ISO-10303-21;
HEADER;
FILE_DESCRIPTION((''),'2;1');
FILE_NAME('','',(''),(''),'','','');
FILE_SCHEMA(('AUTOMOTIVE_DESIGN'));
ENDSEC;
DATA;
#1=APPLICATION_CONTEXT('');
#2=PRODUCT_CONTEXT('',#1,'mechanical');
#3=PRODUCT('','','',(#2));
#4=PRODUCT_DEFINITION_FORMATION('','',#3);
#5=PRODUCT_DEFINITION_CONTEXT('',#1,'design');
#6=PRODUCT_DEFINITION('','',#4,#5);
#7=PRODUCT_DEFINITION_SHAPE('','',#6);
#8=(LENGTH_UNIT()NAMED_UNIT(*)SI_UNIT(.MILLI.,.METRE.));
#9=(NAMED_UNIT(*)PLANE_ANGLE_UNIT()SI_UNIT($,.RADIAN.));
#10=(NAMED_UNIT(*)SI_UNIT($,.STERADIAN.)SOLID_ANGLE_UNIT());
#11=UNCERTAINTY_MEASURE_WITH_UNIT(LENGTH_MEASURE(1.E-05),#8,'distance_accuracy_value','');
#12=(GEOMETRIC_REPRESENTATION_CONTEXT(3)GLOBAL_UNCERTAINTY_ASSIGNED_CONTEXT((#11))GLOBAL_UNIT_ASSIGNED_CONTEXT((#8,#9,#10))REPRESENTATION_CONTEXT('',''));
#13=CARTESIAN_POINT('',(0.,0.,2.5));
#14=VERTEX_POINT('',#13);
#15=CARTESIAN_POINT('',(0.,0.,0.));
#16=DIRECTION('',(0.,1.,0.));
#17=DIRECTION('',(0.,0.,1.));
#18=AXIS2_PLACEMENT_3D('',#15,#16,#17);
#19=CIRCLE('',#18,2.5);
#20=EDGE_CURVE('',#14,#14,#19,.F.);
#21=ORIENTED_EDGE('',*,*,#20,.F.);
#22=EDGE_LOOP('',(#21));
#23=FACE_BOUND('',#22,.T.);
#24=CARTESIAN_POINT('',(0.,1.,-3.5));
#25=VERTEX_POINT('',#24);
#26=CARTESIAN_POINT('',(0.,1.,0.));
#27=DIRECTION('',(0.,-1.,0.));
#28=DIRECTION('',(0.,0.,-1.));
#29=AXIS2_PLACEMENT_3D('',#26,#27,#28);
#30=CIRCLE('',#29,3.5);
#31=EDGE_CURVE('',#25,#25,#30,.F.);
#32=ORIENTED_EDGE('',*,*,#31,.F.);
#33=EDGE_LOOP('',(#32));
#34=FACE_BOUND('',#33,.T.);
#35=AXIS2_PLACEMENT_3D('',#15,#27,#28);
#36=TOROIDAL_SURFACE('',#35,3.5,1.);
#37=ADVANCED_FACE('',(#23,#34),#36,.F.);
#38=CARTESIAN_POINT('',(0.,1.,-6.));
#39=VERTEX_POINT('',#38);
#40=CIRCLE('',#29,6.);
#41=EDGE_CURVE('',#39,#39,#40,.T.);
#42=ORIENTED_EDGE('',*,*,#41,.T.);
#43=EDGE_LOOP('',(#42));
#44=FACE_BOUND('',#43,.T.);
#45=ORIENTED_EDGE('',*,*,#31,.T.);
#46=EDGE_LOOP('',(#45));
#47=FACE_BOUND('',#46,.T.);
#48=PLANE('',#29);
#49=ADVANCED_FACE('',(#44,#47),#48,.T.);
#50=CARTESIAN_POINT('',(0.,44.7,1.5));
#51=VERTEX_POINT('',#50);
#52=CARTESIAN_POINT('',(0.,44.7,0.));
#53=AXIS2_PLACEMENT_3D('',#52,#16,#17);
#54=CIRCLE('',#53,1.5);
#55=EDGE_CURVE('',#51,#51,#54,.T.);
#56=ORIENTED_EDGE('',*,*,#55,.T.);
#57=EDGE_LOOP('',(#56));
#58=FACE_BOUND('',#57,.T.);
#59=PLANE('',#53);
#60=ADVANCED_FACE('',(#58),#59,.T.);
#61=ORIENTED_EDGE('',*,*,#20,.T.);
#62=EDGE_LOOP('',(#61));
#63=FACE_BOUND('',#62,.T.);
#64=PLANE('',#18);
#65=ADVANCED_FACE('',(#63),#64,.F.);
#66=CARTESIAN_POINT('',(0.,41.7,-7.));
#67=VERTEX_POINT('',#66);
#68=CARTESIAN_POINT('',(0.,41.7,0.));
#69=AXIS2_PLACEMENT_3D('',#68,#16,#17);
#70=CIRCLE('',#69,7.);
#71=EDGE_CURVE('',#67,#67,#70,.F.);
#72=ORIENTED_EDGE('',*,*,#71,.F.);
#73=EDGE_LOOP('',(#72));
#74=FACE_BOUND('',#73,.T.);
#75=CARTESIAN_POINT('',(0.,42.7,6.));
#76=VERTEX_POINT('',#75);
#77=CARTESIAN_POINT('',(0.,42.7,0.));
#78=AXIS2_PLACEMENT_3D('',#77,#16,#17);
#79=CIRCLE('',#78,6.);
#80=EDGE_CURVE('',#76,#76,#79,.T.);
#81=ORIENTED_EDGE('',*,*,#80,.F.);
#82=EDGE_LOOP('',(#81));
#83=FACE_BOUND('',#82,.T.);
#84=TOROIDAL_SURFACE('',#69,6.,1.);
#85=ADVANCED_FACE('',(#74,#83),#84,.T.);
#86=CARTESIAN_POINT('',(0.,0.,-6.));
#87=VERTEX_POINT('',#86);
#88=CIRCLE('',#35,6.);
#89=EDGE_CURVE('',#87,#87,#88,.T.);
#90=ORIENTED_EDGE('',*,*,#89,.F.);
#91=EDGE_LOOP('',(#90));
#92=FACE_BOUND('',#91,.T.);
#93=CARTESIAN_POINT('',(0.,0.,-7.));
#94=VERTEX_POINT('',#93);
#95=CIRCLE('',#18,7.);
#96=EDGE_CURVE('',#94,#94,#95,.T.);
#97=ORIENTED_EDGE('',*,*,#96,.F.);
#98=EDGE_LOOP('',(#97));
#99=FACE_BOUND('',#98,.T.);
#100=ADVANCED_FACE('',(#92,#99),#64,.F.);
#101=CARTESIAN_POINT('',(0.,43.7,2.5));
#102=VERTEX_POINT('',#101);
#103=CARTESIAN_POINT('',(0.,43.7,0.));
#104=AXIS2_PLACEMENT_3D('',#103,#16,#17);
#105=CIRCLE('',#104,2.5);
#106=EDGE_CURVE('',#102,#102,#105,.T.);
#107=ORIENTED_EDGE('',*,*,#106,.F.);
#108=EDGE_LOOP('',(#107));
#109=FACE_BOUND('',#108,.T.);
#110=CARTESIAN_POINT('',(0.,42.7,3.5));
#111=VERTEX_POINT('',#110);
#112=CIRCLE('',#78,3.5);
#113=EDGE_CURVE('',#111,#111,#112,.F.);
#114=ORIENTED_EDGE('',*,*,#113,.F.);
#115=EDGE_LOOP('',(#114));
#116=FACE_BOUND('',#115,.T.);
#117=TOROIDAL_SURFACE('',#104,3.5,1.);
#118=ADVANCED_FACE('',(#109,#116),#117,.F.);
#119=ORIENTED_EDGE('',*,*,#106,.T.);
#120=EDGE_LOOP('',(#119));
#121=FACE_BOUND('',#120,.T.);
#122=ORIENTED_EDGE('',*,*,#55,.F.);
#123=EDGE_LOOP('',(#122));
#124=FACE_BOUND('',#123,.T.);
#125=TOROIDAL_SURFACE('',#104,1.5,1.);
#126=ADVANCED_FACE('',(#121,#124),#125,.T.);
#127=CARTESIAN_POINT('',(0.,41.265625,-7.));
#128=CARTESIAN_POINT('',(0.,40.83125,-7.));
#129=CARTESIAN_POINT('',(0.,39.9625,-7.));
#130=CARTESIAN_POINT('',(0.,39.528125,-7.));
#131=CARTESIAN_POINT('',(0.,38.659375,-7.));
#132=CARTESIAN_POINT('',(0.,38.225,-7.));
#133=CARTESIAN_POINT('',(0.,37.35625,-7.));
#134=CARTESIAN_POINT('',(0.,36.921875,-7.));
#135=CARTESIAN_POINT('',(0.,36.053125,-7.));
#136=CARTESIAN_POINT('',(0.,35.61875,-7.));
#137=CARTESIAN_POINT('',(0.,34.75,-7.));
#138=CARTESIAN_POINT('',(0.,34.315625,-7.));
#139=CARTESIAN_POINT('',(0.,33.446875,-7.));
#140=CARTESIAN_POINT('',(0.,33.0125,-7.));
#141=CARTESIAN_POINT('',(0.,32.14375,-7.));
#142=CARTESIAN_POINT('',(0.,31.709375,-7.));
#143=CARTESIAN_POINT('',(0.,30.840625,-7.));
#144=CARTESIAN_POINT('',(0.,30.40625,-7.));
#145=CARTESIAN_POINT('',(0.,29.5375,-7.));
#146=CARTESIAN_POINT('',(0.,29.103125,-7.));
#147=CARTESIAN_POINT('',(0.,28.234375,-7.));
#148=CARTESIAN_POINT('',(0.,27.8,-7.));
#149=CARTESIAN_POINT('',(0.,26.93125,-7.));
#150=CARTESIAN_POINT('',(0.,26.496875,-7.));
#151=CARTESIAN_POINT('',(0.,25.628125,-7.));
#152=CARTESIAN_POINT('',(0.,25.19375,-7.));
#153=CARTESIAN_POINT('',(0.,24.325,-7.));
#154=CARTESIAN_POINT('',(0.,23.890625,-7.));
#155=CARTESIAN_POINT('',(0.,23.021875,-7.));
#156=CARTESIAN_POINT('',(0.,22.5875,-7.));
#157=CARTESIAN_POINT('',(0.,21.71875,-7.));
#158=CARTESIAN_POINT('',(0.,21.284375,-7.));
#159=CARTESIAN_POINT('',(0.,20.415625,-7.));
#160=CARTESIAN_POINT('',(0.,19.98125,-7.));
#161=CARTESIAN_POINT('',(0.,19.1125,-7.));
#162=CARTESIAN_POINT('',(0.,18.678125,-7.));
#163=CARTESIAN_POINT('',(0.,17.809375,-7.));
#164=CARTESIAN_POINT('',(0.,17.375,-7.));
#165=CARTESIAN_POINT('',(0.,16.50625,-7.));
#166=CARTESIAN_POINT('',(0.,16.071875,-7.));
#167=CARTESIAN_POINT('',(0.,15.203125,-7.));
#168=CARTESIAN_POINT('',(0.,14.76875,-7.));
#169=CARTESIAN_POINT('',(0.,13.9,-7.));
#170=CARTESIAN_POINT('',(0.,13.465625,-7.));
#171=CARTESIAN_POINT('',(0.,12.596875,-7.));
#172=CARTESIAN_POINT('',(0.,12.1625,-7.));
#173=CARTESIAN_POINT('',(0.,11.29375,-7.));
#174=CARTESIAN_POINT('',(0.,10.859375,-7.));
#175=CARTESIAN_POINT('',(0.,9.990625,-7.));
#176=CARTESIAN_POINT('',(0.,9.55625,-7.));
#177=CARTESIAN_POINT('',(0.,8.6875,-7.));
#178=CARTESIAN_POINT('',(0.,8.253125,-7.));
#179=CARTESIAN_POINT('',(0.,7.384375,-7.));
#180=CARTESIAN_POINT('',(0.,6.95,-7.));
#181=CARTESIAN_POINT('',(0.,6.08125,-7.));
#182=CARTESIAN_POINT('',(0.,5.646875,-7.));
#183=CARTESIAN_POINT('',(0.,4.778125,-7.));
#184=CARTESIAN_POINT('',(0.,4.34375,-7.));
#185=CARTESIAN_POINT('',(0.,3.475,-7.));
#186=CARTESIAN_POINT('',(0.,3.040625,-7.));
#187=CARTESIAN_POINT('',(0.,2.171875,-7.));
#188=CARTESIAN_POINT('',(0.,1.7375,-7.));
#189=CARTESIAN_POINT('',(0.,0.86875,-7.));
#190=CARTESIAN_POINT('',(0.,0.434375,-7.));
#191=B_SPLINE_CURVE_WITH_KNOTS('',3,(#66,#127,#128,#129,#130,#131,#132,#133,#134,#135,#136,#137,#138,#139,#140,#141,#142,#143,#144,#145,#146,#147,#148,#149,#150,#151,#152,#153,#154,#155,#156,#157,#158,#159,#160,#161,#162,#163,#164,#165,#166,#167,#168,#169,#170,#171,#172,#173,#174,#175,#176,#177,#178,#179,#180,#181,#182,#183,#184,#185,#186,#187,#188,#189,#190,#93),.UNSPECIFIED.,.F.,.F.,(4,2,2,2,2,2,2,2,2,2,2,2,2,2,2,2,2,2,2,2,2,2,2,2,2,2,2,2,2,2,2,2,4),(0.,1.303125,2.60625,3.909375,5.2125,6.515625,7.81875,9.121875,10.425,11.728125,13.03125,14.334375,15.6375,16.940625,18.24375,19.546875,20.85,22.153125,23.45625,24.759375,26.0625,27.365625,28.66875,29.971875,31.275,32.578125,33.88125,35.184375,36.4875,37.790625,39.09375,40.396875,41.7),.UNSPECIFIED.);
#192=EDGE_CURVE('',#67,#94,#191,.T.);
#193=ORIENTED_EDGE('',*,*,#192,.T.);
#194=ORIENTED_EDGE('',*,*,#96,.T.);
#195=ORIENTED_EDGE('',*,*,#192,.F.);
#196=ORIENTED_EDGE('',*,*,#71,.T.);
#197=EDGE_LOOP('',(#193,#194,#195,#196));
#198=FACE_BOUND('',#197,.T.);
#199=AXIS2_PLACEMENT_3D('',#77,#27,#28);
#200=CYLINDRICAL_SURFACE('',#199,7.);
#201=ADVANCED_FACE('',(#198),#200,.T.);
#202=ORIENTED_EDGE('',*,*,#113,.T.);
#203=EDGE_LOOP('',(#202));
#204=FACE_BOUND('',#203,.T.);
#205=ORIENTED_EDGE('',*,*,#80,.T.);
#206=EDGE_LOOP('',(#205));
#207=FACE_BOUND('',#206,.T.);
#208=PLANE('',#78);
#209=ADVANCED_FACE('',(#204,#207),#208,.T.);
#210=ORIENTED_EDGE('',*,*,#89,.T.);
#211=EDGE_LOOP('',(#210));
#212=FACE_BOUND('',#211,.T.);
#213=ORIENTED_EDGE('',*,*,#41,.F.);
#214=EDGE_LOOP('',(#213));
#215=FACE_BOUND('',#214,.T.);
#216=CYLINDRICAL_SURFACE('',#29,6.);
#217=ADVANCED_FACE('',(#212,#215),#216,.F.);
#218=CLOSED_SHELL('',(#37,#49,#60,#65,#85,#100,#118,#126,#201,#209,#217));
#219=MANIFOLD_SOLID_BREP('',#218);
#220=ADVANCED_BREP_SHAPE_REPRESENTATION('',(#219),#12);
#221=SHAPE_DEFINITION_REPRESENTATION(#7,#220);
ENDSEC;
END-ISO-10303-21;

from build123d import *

# Parameters (mm, degrees)
SKETCH1_R                       = 7
BOSS_EXTRUDE1_DEPTH             = 42.7
SKETCH3_R                       = 6
CUT_EXTRUDE1_DEPTH              = 1
SKETCH2_R                       = 2.5
BOSS_EXTRUDE2_DEPTH             = 2
BOSS_EXTRUDE2_DIRECTION_2_REACH = 45.833
FILLET2_R                       = 1
FILLET4_R                       = 1


with BuildPart() as part:
    # Sketch1 → Boss-Extrude1 (new body)
    with BuildSketch(Plane(origin=(0, 0, 0), x_dir=(1, 0, 0), z_dir=(0, 1, 0))):
        with Locations(Location((0, 0, 0), (0, 0, 90))):
            Circle(SKETCH1_R)
    extrude(amount=BOSS_EXTRUDE1_DEPTH)

    # Sketch3 → Cut-Extrude1 (cut)
    with BuildSketch(Plane.XZ):
        with Locations(Location((0, 0, 0), (0, 0, 270))):
            Circle(SKETCH3_R)
    extrude(amount=-CUT_EXTRUDE1_DEPTH, mode=Mode.SUBTRACT)

    # Sketch2 → Boss-Extrude2 (add)
    with BuildSketch(Plane(origin=(0, 42.7, 0), x_dir=(1, 0, 0), z_dir=(0, 1, 0))):
        with Locations(Location((0, 0, 0), (0, 0, 270))):
            Circle(SKETCH2_R)
    extrude(amount=BOSS_EXTRUDE2_DEPTH)

    # Boss-Extrude2 direction 2: up to this face of the body (flat: up to its plane)
    boss_extrude2_direction_2_end = Plane(part.part.faces().sort_by_distance((0, 0, 6.802010101))[0])
    # Sketch2 → Boss-Extrude2 direction 2 (add, up to the picked face)
    with BuildSketch(Plane(origin=(0, 42.7, 0), x_dir=(1, 0, 0), z_dir=(0, 1, 0)), mode=Mode.PRIVATE) as boss_extrude2_direction_2_sk1:
        with Locations(Location((0, 0, 0), (0, 0, 270))):
            Circle(SKETCH2_R)
    boss_extrude2_direction_2_tool1 = split(extrude(boss_extrude2_direction_2_sk1.sketch, amount=-BOSS_EXTRUDE2_DIRECTION_2_REACH, mode=Mode.PRIVATE), bisect_by=boss_extrude2_direction_2_end, keep=Keep.BOTH, mode=Mode.PRIVATE)
    add(boss_extrude2_direction_2_tool1.solids().sort_by(Axis((0, 42.7, 0), (0, -1, 0)))[0])

    # Fillet2
    fillet2_edges = [part.edges().sort_by_distance(p)[0] for p in [
        (0, 1, -2.5),
    ]]
    fillet(fillet2_edges, radius=FILLET2_R - 0.0001)  # a hair under: the kernel refuses the full size

    # Fillet4
    fillet4_edges = [part.edges().sort_by_distance(p)[0] for p in [
        (0, 42.7, -2.5),
        (0, 44.7, -2.5),
        (0, 42.7, 7),
    ]]
    fillet(fillet4_edges, radius=FILLET4_R - 0.0001)  # a hair under: the kernel refuses the full size


solid = part.part
